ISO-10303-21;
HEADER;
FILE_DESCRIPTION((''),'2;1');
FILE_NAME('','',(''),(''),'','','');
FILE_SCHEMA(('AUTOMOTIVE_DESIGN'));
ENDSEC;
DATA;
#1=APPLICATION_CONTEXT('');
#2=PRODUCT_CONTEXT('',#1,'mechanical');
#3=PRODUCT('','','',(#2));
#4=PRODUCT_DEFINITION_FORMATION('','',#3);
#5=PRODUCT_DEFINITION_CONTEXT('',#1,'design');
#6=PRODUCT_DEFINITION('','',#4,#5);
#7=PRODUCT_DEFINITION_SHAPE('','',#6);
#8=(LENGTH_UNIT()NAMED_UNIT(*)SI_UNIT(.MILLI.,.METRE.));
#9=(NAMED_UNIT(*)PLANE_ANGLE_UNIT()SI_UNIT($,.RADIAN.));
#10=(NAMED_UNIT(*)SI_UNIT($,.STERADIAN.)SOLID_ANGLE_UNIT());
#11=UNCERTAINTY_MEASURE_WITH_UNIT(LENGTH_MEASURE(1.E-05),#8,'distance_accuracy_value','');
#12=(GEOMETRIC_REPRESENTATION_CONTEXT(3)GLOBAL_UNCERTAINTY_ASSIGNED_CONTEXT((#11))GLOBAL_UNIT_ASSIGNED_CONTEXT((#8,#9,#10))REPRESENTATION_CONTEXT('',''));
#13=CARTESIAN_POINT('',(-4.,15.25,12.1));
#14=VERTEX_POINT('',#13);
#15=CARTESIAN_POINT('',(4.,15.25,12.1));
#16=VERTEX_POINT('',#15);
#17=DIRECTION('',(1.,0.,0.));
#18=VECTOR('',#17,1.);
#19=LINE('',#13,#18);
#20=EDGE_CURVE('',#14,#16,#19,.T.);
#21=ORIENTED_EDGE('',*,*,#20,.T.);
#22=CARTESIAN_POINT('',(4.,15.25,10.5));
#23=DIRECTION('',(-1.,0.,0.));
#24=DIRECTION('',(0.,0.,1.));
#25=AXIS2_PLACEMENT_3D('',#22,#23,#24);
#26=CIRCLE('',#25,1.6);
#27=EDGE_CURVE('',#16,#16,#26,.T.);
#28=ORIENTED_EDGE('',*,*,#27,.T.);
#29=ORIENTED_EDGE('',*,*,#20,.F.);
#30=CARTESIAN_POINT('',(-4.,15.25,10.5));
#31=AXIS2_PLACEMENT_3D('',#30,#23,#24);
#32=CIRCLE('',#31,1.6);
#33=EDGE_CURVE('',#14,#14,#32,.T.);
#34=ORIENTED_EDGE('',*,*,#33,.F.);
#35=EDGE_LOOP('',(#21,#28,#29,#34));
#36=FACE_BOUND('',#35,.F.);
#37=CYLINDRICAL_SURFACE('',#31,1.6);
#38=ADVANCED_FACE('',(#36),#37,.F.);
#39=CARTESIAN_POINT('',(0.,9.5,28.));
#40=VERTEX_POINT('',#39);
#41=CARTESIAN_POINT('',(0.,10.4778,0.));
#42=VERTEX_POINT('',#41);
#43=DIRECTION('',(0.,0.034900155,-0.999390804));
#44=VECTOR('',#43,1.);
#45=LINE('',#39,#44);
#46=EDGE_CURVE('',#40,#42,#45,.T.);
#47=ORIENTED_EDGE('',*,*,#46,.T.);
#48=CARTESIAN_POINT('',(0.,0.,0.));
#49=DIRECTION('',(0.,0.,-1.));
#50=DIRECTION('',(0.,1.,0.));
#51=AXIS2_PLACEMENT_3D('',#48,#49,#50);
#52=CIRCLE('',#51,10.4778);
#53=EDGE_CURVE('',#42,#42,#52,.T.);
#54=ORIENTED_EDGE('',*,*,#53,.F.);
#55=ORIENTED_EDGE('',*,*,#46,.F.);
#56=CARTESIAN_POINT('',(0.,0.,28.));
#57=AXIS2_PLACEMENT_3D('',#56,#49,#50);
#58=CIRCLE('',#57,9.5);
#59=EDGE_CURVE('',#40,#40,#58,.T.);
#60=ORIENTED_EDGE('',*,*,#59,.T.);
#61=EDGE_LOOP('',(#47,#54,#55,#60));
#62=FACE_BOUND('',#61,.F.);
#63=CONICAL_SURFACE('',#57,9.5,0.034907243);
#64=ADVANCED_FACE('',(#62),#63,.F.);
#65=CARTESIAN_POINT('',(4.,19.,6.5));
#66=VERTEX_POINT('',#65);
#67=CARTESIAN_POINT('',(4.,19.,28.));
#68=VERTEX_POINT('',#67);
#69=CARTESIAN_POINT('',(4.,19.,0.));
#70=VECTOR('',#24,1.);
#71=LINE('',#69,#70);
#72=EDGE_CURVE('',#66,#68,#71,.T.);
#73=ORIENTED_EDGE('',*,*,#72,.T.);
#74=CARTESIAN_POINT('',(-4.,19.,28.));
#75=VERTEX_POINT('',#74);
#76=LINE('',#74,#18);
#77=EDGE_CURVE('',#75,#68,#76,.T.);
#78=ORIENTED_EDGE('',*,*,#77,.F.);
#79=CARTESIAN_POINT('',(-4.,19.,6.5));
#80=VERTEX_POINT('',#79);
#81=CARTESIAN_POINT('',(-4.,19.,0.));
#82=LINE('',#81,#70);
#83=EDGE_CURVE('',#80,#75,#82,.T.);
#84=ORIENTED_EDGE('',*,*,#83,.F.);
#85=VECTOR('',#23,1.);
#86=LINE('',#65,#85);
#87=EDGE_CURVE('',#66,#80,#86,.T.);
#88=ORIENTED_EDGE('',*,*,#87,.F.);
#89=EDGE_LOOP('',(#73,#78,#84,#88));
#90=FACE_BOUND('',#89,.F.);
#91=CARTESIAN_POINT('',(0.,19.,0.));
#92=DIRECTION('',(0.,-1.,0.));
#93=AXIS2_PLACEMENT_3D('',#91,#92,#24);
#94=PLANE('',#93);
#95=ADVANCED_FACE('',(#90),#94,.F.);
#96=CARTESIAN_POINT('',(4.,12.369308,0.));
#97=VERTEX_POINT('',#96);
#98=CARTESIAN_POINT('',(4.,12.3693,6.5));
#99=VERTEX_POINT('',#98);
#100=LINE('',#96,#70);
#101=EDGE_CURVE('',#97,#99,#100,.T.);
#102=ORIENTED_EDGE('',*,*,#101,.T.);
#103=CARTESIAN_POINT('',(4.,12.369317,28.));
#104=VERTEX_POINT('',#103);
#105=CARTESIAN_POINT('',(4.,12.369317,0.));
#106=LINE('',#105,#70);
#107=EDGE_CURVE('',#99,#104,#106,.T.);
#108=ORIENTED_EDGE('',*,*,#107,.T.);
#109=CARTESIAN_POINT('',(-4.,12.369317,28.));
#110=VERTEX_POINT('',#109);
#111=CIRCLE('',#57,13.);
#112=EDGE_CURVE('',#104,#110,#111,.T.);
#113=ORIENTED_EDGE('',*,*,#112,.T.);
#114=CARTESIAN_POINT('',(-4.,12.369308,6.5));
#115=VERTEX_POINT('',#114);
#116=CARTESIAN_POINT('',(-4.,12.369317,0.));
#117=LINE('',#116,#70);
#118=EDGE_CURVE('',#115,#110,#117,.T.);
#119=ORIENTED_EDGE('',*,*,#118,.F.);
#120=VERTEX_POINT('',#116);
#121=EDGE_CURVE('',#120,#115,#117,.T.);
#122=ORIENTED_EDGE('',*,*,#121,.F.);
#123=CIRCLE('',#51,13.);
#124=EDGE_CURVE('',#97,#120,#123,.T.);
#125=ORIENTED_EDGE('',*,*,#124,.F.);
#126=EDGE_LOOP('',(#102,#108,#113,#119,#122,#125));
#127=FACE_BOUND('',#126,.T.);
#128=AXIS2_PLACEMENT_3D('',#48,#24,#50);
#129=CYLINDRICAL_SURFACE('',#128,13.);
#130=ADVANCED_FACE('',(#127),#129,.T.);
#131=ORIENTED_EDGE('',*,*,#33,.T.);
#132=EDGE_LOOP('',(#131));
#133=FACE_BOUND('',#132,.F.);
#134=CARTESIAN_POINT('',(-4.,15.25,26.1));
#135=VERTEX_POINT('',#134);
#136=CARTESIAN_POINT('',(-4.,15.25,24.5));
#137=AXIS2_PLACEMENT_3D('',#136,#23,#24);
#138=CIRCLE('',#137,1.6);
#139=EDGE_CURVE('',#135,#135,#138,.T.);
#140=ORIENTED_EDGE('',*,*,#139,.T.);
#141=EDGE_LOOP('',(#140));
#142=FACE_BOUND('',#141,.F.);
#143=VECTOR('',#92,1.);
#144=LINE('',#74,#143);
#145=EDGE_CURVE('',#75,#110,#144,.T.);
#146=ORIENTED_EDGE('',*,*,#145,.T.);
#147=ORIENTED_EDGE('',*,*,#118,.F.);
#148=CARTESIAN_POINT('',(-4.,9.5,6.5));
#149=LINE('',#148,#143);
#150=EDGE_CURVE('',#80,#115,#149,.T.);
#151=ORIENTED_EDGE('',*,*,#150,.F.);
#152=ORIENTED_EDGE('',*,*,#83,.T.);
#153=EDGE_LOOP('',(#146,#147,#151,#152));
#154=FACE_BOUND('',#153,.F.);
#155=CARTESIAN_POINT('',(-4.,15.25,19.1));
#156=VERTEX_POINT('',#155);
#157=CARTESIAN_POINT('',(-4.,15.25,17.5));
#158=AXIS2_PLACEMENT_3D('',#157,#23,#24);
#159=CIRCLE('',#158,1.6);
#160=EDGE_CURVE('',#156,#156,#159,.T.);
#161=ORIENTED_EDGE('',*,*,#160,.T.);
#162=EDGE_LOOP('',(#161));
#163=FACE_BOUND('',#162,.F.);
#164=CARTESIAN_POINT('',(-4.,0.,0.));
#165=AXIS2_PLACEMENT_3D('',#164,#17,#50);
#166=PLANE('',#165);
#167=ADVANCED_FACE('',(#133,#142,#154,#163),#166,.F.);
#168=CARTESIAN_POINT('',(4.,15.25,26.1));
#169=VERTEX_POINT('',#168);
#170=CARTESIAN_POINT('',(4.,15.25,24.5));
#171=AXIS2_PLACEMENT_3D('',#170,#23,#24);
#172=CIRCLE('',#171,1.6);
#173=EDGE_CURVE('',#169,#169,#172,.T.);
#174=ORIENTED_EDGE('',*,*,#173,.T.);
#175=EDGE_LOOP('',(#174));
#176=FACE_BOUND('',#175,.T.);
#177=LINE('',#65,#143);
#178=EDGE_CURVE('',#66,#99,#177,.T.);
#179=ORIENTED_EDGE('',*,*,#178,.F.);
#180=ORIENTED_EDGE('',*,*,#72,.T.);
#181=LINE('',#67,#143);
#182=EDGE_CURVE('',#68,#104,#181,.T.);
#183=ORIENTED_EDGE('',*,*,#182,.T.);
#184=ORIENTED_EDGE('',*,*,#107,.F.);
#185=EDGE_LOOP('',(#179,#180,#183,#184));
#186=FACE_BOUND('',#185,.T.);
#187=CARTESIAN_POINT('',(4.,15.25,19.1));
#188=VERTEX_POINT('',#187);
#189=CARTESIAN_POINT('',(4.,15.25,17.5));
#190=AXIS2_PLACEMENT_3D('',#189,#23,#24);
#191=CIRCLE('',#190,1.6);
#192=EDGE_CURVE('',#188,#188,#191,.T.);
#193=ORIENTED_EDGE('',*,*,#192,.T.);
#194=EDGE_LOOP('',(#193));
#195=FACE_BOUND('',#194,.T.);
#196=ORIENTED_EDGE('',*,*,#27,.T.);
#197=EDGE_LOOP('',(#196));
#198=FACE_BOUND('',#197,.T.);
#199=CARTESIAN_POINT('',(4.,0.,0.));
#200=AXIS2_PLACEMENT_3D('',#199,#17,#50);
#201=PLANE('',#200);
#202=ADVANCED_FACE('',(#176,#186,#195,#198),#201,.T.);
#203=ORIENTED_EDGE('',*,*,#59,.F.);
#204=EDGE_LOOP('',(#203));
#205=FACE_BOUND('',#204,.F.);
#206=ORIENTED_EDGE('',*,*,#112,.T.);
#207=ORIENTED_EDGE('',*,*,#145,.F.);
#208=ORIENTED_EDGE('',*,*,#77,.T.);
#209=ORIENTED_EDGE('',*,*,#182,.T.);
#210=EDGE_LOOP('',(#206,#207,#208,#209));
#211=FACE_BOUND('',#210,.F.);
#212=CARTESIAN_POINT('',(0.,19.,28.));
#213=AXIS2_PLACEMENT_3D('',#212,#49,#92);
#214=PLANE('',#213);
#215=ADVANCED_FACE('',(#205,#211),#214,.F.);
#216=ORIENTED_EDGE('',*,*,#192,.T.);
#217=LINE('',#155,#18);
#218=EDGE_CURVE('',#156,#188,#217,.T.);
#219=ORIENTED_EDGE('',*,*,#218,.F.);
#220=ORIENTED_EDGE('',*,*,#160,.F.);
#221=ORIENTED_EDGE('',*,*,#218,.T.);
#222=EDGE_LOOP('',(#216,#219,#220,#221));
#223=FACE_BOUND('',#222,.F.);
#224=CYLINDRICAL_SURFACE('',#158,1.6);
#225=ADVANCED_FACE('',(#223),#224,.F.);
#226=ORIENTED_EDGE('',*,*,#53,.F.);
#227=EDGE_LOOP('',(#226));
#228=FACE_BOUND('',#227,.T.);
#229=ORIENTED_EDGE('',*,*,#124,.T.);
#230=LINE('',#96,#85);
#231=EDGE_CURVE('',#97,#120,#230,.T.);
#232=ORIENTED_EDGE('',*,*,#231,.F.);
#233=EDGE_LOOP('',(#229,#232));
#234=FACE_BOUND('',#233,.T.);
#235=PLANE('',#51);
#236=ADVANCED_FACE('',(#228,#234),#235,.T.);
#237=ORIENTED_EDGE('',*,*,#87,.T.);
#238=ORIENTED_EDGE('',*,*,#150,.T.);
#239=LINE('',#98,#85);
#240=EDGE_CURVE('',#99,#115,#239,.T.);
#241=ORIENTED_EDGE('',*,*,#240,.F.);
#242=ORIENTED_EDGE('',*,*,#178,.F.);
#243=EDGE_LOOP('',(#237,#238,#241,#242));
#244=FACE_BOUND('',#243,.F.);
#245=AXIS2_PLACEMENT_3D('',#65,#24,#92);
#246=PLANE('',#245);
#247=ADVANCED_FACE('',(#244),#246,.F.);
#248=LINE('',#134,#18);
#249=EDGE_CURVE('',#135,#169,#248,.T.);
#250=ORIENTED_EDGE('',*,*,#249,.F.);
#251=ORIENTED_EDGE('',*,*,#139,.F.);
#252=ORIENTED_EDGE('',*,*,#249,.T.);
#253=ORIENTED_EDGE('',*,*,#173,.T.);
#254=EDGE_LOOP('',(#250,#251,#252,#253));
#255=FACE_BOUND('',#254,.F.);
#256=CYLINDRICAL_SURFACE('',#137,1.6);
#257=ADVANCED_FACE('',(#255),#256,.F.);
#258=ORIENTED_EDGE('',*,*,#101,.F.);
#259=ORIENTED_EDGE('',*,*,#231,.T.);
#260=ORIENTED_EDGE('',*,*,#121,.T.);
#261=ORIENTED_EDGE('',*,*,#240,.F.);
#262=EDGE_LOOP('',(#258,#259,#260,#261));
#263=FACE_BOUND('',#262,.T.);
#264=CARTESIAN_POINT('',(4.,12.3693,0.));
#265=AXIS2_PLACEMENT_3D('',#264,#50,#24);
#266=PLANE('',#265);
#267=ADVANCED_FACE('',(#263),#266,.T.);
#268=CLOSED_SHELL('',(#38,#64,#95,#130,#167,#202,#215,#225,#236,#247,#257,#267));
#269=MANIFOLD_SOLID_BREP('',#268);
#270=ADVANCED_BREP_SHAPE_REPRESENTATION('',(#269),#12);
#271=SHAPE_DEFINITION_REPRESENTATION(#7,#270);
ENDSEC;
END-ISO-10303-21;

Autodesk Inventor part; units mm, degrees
ref_plane "YZ Plane" through (0, 0, 0) normal (1, 0, 0) x (0, 1, 0)
ref_plane "XZ Plane" through (0, 0, 0) normal (0, 1, 0) x (-1, 0, 0)
ref_plane "XY Plane" through (0, 0, 0) normal (0, 0, 1) x (1, 0, 0)
sketch "Sketch1" plane through (0, 0, 0) normal (1, 0, 0) x (0, 1, 0)
  line L0 (0, 12.5) -> (0, 0) construction
  line L1 (13, 0) -> (13, 28)
  line L2 (13, 28) -> (9.5, 28)
  line L3 (9.5, 28) -> (10.4778, 0)
  line L4 (13, 0) -> (10.4778, 0)
  dimension "d36" = 13
  dimension "d63" = 28
  dimension "d65" = 9.5
  dimension "d66" = 92
revolve "Revolution1" add sketch "Sketch1" angle 360 about axis through (0, 0, 12.5) along (0, 0, -1)
sketch "Sketch3" plane through (0, 0, 0) normal (1, 0, 0) x (0, 1, 0)
  line L0 (19, 0) -> (19, 28)
  line L1 (19, 28) -> (10.4778, 28)
  line L2 (19, 0) -> (10.4778, 0)
  line L3 (-10.4778, 0) -> (10.4778, 0) projected
  line L4 (10.4778, 0) -> (10.4778, 28)
  line L5 (-13, 28) -> (13, 28) projected
  point P0 (0, 0)
  dimension "d28" = 19
extrude "Extrusion1" add sketch "Sketch3" along normal mid plane 8
sketch "Sketch4" plane through (-4, 0, 0) normal (-1, 0, 0) x (0, 0, 1)
  circle A0 centre (10.5, 15.25) radius 1.6
  circle A1 centre (17.5, 15.25) radius 1.6
  line L0 (10.5, 15.25) -> (17.5, 15.25) construction
  line L1 (28, 19) -> (0, 19) construction
  circle A2 centre (24.5, 15.25) radius 1.6
  point P0 (0, 0)
  point P1 (17, 15.25)
  point P2 (14, 15.25)
  point P3 (14, 19)
  dimension "d29" = 3.2
  dimension "d30" = 3.2
  dimension "d31" = 7
  dimension "d34" = 3.75
  dimension "d67" = 3.2
  dimension "d68" = 7
extrude "Extrusion2" cut sketch "Sketch4" against normal blind 10
sketch "Sketch5" plane through (4, 0, 0) normal (1, 0, 0) x (0, 0, -1)
  circle A0 centre (-10.5, 15.25) radius 1.6 projected
  circle A1 centre (-17.5, 15.25) radius 1.6 projected
  line L0 (0, 12.3693) -> (-28, 12.3693) projected
  line L1 (-20.496, 19) -> (-21.5, 19)
  line L2 (-21.5, 19) -> (-21.5, 12.3693)
  line L3 (-21.5, 12.3693) -> (-20.496, 12.3693)
  line L4 (-20.496, 12.3693) -> (-20.496, 19)
  line L5 (0, 19) -> (-6.5, 19)
  line L6 (-6.5, 19) -> (-6.5, 12.3693)
  line L7 (-6.5, 12.3693) -> (0, 12.3693)
  line L8 (0, 12.3693) -> (0, 19)
  line L9 (0, 19) -> (-28, 19) projected
  point P0 (0, 0)
  dimension "d47" = 15
  dimension "d49" = 4
  dimension "d50" = 4
extrude "Extrusion3" cut sketch "Sketch5" against normal blind 10 contours L0 L6 L5 L8
equation "\"d49\" = d50"
properties part number "brush holder v5"
